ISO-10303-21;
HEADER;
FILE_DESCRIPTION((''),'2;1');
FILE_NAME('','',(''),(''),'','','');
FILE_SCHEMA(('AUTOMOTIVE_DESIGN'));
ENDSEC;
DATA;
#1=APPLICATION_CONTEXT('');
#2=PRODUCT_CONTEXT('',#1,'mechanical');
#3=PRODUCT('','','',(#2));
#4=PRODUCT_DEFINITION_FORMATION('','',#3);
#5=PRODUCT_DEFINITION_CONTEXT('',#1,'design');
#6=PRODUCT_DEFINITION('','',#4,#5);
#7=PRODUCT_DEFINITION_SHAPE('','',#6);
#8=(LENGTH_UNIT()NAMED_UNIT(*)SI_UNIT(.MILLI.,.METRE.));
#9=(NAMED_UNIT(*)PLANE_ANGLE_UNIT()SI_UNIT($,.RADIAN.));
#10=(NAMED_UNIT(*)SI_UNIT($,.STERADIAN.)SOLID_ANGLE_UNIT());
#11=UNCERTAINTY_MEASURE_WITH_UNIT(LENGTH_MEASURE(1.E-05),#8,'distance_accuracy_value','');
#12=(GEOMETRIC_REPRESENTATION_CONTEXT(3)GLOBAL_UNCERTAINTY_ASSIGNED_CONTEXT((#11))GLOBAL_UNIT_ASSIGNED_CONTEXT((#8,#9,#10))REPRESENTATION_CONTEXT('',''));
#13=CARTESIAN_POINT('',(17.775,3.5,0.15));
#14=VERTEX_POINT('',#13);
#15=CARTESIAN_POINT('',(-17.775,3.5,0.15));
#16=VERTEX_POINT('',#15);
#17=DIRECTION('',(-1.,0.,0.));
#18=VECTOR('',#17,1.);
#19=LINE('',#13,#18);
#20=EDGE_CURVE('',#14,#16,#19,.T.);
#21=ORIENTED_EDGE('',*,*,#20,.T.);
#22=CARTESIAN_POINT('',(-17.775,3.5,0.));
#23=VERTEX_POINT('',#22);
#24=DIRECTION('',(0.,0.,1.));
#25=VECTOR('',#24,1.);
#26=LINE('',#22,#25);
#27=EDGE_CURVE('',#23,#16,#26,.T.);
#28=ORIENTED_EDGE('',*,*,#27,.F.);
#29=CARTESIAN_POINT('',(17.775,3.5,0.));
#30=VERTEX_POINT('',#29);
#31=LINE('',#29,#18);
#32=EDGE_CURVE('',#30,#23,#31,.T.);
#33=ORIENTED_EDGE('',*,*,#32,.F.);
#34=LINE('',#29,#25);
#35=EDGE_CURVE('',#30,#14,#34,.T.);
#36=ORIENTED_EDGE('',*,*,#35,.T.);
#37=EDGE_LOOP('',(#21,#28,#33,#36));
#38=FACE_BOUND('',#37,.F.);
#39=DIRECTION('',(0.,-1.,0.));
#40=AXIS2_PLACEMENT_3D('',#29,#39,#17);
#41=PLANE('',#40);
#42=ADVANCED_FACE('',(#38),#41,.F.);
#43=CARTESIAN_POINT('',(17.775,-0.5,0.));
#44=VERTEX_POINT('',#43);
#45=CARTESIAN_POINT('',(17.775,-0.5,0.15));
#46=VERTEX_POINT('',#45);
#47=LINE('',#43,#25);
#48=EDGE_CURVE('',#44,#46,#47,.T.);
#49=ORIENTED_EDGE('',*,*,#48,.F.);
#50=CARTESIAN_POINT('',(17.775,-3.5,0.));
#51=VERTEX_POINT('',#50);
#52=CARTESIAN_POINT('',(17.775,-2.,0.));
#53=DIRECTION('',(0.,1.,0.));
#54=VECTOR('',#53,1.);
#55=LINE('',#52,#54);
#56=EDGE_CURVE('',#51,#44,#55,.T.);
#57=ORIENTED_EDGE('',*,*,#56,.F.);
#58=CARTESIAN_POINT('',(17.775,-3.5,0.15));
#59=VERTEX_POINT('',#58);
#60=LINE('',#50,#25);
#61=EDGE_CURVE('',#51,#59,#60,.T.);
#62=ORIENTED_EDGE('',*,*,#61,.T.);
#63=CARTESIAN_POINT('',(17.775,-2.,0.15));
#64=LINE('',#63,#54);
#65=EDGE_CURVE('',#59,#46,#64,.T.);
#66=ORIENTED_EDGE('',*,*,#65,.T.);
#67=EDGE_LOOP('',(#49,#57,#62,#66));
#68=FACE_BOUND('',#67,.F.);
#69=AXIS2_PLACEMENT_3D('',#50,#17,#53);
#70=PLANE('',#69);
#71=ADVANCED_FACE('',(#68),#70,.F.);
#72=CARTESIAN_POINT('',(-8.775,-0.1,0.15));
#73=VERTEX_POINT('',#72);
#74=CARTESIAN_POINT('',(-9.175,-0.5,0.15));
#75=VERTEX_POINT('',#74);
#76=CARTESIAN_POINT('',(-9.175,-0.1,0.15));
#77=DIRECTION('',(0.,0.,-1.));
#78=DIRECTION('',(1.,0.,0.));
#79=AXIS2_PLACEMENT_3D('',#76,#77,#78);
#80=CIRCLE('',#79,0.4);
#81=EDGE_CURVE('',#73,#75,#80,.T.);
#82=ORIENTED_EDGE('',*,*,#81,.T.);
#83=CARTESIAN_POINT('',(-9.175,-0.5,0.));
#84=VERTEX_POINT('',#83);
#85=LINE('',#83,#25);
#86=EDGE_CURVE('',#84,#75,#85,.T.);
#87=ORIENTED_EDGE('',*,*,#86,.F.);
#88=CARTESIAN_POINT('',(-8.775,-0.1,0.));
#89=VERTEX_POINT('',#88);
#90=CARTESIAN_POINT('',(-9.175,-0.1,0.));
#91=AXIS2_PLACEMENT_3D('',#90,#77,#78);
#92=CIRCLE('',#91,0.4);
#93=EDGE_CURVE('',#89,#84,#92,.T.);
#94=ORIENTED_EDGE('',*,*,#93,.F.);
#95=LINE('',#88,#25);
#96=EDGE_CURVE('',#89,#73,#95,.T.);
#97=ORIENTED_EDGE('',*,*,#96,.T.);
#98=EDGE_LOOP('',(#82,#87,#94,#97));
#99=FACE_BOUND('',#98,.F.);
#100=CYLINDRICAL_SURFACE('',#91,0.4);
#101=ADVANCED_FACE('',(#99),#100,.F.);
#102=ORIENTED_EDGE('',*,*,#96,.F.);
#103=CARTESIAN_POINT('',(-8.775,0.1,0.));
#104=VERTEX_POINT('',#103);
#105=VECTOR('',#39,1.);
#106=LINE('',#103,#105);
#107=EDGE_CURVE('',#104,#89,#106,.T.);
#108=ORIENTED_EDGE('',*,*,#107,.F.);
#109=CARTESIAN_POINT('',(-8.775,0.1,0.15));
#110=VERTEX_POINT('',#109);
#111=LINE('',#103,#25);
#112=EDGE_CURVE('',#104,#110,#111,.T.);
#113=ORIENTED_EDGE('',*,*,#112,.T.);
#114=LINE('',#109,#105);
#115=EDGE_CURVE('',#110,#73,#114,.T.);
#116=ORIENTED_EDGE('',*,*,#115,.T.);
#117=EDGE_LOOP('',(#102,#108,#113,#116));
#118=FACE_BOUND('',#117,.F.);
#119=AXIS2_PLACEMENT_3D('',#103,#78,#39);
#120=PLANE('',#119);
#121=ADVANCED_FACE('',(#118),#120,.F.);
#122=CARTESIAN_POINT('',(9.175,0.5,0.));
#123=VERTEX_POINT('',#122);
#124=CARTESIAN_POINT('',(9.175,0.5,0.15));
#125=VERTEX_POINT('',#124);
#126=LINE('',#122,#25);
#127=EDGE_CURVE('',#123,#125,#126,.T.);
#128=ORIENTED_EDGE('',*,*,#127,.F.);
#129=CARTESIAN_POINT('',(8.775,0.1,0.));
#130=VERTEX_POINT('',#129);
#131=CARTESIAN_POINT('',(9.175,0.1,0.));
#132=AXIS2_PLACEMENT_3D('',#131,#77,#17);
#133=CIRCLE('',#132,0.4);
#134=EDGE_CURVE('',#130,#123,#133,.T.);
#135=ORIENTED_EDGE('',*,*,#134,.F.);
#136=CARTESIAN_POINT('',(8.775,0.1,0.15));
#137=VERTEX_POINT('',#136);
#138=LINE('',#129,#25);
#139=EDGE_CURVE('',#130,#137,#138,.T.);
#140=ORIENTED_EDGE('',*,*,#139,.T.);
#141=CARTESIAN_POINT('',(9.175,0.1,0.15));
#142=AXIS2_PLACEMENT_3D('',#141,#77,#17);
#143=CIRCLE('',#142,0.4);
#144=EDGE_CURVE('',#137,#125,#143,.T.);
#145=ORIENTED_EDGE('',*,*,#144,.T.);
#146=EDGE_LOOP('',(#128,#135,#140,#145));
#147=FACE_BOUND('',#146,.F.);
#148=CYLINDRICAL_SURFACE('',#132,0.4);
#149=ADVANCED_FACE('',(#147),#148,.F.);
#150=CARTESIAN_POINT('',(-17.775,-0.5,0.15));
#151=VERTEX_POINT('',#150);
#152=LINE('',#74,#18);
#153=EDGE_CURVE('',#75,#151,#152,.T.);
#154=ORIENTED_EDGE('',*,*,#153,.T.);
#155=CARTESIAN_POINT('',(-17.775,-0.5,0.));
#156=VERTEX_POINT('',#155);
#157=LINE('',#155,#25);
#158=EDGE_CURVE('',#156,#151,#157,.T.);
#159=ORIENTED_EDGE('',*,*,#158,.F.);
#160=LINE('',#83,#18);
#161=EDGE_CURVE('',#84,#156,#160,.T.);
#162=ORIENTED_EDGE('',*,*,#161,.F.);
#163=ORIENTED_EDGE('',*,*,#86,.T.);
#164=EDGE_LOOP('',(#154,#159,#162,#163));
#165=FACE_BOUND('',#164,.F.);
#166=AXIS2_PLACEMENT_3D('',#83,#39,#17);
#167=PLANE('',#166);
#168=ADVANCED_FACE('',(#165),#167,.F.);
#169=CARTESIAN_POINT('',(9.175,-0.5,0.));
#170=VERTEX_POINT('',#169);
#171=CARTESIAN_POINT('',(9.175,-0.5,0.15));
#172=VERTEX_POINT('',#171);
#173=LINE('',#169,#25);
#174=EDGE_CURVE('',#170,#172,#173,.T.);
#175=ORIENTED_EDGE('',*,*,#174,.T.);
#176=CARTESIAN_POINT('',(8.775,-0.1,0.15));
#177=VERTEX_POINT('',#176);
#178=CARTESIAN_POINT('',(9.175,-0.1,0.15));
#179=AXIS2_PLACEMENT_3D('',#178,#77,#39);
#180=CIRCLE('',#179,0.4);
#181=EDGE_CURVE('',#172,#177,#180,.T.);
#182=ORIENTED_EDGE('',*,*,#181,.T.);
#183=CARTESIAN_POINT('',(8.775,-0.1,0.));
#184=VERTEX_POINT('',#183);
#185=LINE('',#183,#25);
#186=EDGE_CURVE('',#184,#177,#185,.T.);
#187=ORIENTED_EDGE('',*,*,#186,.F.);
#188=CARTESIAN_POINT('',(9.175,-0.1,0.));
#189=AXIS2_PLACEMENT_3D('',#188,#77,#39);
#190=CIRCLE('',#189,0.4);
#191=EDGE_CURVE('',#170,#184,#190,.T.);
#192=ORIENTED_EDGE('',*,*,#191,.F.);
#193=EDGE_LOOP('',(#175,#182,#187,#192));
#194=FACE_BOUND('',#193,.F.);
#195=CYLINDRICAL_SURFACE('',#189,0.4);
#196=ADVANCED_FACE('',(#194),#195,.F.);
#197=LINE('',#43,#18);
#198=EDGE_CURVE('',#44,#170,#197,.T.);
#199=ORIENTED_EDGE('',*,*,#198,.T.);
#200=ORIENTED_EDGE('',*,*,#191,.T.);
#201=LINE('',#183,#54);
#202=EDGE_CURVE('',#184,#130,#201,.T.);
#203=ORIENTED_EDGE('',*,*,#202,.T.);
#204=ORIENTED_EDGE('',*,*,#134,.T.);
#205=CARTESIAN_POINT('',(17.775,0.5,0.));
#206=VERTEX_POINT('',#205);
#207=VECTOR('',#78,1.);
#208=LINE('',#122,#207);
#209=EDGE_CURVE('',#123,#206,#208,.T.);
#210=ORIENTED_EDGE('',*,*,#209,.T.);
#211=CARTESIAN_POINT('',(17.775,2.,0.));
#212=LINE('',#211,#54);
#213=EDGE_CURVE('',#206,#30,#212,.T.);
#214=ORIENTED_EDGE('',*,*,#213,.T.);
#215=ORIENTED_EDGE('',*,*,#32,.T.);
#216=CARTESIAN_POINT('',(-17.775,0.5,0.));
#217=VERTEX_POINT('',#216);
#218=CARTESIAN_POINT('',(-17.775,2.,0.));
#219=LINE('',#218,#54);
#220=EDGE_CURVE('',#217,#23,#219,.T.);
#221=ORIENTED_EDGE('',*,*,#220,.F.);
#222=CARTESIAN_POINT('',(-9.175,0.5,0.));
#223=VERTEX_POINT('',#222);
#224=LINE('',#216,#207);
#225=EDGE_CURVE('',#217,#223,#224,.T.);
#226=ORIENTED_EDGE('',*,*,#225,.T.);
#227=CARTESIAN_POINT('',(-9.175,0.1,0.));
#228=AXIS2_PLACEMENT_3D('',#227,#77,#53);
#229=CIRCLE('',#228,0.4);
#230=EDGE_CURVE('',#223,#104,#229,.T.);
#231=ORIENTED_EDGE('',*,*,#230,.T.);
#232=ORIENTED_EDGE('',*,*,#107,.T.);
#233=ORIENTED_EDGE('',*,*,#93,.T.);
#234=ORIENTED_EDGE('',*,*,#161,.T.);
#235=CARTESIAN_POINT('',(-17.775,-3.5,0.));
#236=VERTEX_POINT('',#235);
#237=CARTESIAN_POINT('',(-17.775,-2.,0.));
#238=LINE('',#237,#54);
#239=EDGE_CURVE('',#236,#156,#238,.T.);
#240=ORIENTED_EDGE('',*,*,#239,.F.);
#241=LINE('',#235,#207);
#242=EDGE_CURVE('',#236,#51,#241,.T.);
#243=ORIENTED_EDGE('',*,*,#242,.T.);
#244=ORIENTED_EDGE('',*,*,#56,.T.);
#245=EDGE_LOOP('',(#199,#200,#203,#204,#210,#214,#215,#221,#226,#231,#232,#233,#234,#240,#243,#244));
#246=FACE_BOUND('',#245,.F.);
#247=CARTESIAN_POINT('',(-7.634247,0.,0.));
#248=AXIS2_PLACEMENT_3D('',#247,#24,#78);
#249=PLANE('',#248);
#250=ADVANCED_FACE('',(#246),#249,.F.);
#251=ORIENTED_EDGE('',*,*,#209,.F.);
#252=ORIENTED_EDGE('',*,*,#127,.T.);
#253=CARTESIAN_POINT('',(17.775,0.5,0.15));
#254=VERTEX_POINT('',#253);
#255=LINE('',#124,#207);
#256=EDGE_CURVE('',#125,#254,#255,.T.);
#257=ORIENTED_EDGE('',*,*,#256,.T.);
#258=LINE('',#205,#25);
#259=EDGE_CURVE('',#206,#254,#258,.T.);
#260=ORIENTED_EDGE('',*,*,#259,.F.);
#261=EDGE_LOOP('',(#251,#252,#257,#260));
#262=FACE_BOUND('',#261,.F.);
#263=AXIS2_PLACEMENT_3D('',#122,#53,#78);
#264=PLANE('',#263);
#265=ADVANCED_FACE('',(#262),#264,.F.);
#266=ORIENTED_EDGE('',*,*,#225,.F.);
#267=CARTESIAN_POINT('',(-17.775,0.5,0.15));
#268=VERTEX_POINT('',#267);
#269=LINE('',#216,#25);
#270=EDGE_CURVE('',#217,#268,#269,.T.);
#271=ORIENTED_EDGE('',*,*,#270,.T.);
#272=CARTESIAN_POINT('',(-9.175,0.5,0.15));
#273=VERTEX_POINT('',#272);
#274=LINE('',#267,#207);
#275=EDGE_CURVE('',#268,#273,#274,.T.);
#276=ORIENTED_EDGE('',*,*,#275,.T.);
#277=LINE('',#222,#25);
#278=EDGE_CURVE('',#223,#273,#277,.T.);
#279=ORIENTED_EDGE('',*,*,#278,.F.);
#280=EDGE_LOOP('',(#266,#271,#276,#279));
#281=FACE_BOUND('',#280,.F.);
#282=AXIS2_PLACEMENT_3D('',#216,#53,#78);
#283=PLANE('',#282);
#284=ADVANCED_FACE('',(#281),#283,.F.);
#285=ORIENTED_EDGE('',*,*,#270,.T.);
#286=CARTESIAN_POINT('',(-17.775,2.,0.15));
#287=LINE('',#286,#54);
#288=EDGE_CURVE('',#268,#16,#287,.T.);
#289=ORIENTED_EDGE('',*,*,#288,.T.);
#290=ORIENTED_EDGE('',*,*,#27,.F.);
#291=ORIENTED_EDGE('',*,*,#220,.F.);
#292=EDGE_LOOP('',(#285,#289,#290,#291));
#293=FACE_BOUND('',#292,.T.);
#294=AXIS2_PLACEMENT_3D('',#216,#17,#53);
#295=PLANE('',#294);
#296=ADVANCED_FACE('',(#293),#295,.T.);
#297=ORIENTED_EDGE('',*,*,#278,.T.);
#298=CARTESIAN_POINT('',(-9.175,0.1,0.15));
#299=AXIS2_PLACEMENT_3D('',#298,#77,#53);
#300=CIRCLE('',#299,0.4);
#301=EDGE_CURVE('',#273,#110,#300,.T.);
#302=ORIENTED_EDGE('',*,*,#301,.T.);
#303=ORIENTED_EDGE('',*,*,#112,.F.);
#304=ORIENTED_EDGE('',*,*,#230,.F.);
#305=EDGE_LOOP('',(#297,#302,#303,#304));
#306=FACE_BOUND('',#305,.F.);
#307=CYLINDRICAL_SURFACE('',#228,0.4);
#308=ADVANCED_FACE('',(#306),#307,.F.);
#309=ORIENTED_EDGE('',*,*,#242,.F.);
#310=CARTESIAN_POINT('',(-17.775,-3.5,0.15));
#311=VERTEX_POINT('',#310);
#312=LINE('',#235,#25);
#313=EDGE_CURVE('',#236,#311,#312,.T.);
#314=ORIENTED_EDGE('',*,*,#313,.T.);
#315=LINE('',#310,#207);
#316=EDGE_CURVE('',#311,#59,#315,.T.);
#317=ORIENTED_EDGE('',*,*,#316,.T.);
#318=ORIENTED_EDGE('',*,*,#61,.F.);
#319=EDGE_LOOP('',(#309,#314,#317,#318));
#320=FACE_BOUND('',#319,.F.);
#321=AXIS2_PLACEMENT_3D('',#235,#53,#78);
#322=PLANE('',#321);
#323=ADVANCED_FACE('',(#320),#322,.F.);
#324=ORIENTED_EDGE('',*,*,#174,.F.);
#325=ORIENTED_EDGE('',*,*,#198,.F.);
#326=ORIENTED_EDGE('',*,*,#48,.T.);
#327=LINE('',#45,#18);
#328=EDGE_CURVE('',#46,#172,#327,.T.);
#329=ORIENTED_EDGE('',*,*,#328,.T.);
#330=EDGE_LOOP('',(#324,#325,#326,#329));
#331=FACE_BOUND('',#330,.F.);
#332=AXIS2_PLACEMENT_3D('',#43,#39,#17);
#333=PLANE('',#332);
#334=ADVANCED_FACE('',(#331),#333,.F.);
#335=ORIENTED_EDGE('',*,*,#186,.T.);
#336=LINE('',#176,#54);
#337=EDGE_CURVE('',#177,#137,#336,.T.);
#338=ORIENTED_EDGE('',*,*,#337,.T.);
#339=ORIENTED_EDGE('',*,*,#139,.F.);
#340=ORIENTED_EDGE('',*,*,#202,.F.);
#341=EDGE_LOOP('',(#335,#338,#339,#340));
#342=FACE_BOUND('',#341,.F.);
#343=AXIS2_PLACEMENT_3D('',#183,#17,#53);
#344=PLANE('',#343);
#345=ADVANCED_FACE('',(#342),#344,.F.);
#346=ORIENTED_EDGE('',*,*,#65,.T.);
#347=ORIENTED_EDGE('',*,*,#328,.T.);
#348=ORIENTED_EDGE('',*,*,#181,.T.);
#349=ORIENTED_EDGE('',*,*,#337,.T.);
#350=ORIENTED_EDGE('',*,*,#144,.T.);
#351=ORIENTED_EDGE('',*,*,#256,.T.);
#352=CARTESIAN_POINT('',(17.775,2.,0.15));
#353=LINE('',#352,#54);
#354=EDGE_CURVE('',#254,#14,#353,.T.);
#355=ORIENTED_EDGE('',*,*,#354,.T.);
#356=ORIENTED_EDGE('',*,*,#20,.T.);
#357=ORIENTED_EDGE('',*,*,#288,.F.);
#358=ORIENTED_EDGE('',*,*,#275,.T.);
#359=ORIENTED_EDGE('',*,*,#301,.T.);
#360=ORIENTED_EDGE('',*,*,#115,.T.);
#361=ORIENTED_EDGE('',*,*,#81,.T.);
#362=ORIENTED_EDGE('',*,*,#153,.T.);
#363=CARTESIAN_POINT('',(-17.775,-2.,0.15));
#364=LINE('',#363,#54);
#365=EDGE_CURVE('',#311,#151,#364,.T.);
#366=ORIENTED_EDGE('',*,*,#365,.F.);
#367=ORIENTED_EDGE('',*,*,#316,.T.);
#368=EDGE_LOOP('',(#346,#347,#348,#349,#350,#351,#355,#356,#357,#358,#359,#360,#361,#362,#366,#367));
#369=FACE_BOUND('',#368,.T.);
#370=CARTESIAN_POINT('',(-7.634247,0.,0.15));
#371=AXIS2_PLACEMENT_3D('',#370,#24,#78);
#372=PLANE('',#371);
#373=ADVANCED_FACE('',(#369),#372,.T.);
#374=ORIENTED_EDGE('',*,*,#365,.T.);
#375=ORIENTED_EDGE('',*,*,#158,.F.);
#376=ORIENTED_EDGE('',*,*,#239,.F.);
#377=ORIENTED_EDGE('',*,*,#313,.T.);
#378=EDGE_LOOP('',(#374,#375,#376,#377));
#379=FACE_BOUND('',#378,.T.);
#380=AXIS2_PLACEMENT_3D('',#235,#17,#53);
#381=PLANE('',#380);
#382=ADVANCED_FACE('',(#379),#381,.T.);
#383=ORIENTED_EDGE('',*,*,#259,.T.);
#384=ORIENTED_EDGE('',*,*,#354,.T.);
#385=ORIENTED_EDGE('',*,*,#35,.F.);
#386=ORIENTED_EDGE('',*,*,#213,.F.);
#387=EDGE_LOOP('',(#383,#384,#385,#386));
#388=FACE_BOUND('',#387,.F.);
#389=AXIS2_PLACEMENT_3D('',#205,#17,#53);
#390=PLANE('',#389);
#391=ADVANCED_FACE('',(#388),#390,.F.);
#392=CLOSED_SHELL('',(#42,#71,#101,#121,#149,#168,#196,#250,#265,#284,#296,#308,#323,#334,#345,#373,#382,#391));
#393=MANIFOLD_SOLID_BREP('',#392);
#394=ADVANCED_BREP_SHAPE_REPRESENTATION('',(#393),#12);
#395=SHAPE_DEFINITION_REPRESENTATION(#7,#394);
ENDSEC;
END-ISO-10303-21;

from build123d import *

# Parameters (mm, degrees)
F0_W     = 4
F0_H     = 3
F1_DEPTH = 0.15


# Not quite as in the source:
# - a feature names something its author has since deleted; it is built from what else it names


with BuildPart() as f1:
    # F0 (on Top) → F1 (new body)
    with BuildSketch(Plane.XY):
        with BuildLine():
            ThreePointArc((-8.775, -0.1), (-8.8921572875, -0.3828427125), (-9.175, -0.5))
            Line((-9.175, -0.5), (-13.775, -0.5))
            Line((-13.775, -0.5), (-13.775, -3.5))
            Line((-13.775, -3.5), (0, -3.5))
            Line((0, -3.5), (0, 3.5))
            Line((0, 3.5), (-13.775, 3.5))
            Line((-13.775, 3.5), (-13.775, 0.5))
            Line((-13.775, 0.5), (-9.175, 0.5))
            ThreePointArc((-9.175, 0.5), (-8.8921572875, 0.3828427125), (-8.775, 0.1))
            Line((-8.775, 0.1), (-8.775, -0.1))
        make_face()
        with Locations((-15.775, -2)):
            Rectangle(F0_W, F0_H)
        with BuildLine():
            Line((0, 3.5), (0, -3.5))
            Line((0, -3.5), (13.775, -3.5))
            Line((13.775, -3.5), (13.775, -0.5))
            Line((13.775, -0.5), (9.175, -0.5))
            ThreePointArc((9.175, -0.5), (8.8921572875, -0.3828427125), (8.775, -0.1))
            Line((8.775, -0.1), (8.775, 0.1))
            ThreePointArc((8.775, 0.1), (8.8921572875, 0.3828427125), (9.175, 0.5))
            Line((9.175, 0.5), (13.775, 0.5))
            Line((13.775, 0.5), (13.775, 3.5))
            Line((13.775, 3.5), (0, 3.5))
        make_face()
        with Locations((15.775, -2)):
            Rectangle(F0_W, F0_H)
        with Locations((-15.775, 2)):
            Rectangle(F0_W, F0_H)
        with Locations((15.775, 2)):
            Rectangle(F0_W, F0_H)
    extrude(amount=F1_DEPTH)


solid = f1.part
